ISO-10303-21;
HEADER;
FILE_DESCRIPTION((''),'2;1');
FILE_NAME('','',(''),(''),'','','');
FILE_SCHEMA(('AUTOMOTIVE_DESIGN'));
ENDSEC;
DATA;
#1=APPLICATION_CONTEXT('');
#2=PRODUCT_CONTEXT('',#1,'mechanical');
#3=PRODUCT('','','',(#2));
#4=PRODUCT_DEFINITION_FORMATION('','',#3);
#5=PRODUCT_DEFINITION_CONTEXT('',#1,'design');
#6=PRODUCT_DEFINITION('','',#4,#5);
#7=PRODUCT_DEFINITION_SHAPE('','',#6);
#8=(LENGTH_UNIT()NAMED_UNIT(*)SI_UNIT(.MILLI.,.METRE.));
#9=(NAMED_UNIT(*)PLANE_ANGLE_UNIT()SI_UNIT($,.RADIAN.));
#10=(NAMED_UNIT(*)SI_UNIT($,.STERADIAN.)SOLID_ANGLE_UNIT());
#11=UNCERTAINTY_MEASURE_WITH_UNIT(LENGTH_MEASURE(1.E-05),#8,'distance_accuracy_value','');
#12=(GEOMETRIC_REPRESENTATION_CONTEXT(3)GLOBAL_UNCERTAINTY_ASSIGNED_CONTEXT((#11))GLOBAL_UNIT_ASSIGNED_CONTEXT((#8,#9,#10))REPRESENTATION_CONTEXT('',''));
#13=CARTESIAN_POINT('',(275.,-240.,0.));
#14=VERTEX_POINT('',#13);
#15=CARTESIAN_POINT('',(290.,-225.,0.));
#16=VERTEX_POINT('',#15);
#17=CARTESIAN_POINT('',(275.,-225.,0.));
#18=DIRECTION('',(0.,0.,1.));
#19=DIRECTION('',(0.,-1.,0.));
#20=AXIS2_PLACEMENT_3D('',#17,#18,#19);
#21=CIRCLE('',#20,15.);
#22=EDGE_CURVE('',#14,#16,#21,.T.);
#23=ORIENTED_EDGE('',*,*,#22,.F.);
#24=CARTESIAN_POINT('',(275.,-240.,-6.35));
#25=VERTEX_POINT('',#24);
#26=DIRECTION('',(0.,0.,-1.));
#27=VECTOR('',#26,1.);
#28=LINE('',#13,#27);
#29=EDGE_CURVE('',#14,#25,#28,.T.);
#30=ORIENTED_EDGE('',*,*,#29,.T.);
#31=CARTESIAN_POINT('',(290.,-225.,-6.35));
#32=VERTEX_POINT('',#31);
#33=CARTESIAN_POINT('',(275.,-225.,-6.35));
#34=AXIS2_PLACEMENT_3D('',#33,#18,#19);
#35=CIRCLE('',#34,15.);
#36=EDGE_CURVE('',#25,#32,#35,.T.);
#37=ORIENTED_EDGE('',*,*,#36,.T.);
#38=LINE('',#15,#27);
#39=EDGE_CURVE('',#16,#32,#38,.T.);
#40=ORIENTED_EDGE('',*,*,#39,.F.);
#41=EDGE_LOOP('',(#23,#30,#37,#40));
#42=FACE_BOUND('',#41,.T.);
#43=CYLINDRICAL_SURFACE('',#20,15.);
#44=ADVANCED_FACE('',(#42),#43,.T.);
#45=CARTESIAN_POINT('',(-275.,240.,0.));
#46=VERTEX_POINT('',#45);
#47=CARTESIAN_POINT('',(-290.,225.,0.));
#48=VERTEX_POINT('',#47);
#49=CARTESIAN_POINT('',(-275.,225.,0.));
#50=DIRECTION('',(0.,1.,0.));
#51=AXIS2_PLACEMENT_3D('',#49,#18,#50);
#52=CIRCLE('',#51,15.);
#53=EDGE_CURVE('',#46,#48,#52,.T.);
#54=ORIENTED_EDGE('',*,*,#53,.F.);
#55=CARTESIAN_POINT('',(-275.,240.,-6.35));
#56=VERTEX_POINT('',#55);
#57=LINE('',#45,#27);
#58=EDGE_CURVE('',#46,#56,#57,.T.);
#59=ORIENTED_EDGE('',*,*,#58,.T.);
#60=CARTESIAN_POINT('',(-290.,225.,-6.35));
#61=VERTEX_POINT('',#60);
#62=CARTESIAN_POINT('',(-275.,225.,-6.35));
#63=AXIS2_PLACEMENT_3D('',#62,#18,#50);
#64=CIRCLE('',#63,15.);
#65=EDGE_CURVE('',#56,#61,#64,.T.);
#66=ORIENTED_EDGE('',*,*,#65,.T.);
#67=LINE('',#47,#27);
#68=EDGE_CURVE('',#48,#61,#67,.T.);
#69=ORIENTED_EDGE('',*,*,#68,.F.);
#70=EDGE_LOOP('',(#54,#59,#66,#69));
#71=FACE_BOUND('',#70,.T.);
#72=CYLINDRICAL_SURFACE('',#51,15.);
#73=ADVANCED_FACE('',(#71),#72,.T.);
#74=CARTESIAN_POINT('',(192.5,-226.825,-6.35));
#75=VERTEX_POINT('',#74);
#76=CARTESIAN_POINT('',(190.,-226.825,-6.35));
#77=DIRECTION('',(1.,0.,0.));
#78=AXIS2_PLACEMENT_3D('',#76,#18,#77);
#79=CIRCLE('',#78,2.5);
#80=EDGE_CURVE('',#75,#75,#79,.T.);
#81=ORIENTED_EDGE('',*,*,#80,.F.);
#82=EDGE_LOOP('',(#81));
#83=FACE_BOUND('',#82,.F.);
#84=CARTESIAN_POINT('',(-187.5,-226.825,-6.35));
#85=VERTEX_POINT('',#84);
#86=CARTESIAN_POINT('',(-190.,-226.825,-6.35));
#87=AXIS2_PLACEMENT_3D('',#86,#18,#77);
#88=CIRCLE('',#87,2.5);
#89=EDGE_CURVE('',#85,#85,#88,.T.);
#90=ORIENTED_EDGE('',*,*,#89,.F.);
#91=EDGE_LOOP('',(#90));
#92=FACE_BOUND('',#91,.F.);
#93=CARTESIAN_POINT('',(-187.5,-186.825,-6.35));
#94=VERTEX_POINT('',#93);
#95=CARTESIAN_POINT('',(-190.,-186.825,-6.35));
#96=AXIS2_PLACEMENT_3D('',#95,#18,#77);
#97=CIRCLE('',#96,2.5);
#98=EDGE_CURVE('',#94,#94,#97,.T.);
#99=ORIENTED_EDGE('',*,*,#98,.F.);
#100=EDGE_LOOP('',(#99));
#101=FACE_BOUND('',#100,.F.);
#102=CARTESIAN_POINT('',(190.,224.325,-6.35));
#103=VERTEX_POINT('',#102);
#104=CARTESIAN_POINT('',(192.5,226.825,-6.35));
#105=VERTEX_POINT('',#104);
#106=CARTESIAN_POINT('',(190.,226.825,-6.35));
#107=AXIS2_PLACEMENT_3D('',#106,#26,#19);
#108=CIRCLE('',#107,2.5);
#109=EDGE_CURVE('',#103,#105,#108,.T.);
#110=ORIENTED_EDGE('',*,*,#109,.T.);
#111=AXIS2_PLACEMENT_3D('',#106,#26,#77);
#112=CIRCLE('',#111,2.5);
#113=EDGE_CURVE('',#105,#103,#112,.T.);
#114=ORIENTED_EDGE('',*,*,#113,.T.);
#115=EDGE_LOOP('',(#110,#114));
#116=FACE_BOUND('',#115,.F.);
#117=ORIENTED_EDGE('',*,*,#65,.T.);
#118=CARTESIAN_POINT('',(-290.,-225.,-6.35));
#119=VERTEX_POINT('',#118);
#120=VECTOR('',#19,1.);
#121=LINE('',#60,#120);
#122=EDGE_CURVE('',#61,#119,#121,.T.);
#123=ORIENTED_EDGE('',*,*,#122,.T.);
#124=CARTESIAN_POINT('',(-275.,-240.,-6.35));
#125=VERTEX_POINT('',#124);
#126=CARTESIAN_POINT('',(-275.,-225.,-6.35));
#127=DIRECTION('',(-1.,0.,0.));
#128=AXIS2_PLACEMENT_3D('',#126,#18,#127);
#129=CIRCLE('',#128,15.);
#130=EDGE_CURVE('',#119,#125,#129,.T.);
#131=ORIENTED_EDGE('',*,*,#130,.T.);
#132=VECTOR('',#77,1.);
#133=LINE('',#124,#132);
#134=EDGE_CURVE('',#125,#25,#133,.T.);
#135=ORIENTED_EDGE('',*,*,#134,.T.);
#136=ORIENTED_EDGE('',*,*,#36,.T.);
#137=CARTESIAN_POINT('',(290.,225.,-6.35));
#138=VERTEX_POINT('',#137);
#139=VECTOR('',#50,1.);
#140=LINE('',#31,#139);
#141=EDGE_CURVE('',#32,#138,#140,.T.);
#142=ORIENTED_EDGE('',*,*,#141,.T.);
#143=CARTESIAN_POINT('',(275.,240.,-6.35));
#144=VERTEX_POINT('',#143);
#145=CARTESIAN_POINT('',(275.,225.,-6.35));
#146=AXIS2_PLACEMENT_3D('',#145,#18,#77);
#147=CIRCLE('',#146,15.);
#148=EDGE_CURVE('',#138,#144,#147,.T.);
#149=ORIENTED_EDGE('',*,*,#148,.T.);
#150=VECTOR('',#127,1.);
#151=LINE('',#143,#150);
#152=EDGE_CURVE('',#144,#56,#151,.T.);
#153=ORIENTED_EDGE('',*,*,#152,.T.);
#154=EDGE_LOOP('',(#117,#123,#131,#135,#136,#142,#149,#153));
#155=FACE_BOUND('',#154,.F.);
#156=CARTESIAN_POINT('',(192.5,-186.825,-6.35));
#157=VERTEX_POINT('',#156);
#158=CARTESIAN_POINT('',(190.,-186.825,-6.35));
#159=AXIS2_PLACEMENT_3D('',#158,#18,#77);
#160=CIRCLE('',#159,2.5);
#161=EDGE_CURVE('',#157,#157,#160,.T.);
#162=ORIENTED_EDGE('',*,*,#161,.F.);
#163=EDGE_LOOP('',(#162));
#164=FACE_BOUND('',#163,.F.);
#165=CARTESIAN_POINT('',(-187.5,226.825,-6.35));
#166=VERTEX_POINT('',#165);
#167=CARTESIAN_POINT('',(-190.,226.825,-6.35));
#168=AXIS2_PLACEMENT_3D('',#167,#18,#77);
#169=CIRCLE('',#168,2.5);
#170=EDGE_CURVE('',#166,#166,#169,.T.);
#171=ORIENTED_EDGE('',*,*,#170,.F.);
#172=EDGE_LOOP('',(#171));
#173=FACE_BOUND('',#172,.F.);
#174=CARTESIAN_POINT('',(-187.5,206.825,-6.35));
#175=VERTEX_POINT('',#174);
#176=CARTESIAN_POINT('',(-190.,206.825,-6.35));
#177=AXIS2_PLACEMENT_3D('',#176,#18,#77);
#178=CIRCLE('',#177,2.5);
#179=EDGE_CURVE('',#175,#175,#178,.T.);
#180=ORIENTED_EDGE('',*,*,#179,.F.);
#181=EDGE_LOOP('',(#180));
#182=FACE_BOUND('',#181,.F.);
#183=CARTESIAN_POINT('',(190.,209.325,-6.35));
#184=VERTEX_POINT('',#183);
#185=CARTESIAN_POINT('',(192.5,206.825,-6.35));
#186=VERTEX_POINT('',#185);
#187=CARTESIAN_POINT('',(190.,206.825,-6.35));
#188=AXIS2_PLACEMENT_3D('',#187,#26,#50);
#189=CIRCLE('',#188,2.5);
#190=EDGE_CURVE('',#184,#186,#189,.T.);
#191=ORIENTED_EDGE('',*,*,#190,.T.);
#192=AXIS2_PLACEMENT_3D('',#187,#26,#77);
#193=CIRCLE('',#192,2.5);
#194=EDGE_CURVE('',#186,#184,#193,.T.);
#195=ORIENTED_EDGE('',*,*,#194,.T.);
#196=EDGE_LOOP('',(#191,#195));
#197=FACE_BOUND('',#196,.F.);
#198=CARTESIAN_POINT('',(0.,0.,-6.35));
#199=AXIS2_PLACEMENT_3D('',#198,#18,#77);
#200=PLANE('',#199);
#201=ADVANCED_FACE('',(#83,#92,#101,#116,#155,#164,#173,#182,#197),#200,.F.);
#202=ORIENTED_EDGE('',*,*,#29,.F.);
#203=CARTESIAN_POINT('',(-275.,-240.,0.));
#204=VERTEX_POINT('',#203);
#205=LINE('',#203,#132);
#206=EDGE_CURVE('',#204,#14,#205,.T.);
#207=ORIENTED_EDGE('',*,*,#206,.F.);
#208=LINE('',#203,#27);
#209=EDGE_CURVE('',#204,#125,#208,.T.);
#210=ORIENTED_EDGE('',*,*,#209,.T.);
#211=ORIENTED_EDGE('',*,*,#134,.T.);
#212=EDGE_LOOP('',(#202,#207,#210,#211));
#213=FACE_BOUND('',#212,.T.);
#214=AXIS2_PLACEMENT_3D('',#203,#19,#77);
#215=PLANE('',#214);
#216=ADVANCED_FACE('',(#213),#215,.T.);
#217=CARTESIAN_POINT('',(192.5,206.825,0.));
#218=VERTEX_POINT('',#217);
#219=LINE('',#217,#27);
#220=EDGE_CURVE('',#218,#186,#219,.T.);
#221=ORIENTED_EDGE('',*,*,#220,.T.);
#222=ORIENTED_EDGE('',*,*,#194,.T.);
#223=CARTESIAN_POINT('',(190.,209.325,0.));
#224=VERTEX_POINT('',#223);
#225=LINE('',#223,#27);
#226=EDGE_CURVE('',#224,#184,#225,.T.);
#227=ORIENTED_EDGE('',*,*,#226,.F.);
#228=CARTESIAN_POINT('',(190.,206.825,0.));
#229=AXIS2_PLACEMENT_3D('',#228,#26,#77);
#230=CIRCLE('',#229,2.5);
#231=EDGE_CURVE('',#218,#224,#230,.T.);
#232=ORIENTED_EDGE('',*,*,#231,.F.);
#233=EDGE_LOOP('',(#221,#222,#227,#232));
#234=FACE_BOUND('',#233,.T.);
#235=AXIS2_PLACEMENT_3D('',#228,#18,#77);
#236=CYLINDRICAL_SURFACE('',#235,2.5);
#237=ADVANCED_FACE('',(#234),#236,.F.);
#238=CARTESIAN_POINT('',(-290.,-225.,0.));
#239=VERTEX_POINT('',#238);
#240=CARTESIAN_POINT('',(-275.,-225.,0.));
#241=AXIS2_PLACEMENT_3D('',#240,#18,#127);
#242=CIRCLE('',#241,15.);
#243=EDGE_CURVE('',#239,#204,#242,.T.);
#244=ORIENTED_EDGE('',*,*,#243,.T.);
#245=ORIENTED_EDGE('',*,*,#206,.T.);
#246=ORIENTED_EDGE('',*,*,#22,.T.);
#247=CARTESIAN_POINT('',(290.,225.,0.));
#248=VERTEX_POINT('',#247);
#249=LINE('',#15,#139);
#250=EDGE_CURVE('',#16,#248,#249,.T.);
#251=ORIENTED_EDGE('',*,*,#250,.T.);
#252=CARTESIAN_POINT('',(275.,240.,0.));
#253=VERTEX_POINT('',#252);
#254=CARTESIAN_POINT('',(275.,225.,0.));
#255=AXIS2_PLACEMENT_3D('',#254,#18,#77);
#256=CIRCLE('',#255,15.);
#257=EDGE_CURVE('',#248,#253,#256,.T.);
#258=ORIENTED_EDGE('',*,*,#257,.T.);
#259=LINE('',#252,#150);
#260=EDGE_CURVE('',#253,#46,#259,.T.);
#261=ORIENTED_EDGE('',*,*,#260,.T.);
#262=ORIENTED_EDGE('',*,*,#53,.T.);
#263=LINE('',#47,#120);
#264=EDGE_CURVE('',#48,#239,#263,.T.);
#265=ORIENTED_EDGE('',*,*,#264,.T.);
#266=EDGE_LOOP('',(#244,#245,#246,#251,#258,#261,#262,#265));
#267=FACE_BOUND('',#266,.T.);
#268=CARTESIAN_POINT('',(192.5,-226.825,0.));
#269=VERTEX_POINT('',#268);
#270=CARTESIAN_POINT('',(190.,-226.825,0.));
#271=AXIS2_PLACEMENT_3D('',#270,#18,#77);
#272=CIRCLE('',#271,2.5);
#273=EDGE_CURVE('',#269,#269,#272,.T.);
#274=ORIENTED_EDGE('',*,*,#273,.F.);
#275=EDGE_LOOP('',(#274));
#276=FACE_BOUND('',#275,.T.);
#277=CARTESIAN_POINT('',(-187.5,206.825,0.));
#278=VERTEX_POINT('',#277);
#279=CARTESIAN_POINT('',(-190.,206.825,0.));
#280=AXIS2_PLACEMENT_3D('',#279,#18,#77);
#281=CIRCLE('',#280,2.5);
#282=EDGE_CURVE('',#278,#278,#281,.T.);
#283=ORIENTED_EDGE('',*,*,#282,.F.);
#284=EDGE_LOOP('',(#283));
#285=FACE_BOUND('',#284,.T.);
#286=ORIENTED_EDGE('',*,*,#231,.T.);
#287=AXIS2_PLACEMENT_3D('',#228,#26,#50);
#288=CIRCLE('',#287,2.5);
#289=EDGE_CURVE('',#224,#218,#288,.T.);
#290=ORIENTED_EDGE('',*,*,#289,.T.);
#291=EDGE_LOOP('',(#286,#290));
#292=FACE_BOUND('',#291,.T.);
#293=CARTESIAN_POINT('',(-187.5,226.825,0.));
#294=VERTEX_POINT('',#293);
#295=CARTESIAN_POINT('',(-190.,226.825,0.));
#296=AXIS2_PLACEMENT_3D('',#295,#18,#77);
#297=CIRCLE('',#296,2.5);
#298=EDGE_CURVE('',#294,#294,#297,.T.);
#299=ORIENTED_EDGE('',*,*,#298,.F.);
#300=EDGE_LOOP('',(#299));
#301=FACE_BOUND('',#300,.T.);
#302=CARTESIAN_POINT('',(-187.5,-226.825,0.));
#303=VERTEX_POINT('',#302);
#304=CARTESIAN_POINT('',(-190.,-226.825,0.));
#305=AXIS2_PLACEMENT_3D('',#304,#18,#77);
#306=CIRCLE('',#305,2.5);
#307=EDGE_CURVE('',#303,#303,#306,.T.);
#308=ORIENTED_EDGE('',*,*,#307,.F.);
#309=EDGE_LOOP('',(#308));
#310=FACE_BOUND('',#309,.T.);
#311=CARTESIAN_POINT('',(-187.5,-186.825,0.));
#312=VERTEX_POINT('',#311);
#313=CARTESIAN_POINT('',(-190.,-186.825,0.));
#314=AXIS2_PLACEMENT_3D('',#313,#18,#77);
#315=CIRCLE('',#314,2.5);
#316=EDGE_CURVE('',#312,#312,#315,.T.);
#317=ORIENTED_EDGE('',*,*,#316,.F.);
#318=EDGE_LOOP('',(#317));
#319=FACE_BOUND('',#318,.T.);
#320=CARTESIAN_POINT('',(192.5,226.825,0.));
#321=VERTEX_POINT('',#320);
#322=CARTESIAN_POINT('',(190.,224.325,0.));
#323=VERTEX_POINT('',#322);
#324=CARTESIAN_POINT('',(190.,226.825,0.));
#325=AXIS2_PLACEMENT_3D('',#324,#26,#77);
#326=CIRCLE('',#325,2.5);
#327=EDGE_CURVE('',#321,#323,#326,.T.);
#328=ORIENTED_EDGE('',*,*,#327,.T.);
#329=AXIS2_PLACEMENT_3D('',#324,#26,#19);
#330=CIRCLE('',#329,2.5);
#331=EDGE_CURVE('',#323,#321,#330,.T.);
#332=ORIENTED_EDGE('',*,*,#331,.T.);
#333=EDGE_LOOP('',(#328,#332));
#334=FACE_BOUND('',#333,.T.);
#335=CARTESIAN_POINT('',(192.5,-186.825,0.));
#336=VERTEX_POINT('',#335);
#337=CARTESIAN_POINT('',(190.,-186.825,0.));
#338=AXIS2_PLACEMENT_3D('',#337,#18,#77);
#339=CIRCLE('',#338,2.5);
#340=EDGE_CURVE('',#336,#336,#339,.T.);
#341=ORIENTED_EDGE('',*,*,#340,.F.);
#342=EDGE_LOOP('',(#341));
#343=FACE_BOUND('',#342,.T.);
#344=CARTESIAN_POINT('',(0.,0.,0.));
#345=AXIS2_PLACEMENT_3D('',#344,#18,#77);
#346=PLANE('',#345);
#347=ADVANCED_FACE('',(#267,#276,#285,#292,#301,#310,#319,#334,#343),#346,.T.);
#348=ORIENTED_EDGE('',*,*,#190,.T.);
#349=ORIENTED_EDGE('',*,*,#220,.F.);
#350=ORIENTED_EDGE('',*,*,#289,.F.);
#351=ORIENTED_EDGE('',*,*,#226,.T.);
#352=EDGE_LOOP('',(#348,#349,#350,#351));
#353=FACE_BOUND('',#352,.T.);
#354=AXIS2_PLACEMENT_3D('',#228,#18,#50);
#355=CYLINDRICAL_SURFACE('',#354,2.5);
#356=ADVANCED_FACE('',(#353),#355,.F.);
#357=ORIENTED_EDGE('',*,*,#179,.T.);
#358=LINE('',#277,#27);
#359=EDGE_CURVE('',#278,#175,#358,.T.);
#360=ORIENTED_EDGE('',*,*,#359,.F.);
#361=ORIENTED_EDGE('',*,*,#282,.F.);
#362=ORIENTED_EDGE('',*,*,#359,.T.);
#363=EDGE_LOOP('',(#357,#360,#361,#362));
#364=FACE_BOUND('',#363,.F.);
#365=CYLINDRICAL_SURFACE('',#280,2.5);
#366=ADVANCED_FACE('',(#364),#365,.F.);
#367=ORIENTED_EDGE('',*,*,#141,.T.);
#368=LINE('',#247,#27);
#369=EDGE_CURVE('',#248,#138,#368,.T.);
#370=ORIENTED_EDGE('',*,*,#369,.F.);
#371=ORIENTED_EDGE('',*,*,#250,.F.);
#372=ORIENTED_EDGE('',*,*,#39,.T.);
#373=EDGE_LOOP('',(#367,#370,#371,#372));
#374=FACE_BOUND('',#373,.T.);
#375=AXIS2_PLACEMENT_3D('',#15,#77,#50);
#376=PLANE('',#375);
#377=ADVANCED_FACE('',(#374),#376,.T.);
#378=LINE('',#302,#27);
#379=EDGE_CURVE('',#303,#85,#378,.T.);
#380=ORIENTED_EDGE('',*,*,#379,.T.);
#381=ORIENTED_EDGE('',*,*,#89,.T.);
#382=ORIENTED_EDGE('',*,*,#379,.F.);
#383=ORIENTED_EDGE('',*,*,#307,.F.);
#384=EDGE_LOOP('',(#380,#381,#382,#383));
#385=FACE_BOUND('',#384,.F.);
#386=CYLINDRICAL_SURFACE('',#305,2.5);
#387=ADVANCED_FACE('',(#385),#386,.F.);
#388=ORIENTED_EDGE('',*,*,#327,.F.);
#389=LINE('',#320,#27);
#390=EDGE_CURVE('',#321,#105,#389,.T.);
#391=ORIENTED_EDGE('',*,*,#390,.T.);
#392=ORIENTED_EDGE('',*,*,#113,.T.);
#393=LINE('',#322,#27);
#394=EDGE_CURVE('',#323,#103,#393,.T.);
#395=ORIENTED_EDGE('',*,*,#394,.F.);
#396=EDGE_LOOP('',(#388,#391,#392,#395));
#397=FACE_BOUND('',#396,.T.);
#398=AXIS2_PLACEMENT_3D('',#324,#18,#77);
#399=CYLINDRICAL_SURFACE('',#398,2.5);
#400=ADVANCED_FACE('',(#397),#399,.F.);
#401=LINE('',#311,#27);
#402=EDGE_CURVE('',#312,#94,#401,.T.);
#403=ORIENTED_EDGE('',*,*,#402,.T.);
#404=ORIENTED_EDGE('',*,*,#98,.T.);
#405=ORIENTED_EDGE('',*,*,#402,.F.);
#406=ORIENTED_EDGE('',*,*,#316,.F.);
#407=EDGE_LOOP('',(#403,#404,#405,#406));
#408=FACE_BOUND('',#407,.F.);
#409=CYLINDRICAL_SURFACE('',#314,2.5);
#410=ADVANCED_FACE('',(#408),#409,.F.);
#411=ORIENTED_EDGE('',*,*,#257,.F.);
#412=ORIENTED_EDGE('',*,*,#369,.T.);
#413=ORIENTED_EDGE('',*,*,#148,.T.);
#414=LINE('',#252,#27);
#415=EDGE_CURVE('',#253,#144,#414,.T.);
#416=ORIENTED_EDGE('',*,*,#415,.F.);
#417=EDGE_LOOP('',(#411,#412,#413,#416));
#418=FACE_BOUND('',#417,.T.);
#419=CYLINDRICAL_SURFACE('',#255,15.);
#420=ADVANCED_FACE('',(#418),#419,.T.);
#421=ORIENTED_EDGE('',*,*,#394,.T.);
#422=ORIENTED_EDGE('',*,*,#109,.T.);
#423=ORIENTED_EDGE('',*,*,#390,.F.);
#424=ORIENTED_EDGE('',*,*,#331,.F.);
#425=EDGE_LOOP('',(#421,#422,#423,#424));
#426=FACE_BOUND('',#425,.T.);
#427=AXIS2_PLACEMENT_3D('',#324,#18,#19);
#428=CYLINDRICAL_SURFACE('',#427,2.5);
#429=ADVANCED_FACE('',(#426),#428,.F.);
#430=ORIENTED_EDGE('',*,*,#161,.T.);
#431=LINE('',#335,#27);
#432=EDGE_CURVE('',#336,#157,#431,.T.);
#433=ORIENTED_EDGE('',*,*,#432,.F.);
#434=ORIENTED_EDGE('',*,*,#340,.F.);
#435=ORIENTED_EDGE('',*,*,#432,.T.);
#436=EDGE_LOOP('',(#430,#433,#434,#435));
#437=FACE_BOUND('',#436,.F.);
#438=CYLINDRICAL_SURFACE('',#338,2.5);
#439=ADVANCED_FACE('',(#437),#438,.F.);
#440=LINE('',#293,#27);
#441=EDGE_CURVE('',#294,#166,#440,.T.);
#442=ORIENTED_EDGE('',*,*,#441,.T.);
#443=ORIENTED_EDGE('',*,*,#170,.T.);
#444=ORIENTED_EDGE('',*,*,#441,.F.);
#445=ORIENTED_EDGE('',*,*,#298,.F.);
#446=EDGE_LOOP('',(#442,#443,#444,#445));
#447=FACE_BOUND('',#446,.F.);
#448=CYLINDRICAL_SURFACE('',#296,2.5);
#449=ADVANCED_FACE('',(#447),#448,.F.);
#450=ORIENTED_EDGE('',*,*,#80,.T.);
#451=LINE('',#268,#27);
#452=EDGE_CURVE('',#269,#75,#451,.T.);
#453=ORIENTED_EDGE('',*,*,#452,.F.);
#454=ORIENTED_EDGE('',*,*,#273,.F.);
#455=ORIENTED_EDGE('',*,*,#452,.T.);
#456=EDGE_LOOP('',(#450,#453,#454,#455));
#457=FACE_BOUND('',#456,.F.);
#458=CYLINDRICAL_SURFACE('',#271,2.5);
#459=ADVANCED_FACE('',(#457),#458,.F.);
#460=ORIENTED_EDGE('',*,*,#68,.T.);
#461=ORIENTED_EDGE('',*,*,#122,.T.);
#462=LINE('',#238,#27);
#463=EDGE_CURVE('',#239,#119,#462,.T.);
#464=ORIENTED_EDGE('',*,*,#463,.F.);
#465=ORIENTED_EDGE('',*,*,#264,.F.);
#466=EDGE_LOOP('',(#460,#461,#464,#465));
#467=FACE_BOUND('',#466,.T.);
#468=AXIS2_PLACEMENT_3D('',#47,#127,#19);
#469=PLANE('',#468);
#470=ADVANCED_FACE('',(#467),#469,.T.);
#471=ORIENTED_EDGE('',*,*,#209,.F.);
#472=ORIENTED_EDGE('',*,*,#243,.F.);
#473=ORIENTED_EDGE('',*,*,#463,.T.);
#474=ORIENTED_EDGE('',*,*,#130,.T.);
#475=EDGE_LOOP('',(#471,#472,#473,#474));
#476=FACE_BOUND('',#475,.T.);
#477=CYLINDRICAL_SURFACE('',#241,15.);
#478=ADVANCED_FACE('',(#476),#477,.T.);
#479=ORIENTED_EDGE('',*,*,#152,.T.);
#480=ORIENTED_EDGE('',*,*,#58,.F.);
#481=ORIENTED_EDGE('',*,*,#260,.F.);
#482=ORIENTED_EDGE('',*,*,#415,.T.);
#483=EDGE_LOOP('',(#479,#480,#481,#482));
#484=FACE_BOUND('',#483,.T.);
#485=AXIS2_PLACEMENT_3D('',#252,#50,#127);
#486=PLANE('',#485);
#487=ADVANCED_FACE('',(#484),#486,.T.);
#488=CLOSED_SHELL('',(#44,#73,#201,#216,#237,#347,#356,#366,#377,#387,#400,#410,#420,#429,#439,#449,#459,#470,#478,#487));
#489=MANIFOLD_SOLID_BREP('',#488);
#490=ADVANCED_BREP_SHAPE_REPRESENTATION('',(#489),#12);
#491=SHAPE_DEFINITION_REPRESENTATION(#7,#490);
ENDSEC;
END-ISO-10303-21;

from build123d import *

# Parameters (mm, degrees)
F0_R     = 2.5
F1_DEPTH = 6.35


# Not quite as in the source:
# - a length typed as a fraction of an inch, garbled in the dataset ("3 / 203.2 mm" for 3/8 in), is restored


with BuildPart() as f1:
    # F0 (on Top) → F1 (new body)
    with BuildSketch(Plane.XY):
        with BuildLine():
            Line((-275, -240), (275, -240))
            ThreePointArc((275, -240), (285.6066017178, -235.6066017178), (290, -225))
            Line((290, -225), (290, 225))
            ThreePointArc((290, 225), (285.6066017178, 235.6066017178), (275, 240))
            Line((275, 240), (-275, 240))
            ThreePointArc((-275, 240), (-285.6066017178, 235.6066017178), (-290, 225))
            Line((-290, 225), (-290, -225))
            ThreePointArc((-290, -225), (-285.6066017178, -235.6066017178), (-275, -240))
        make_face()
        with Locations((-190, -226.825)):
            Circle(F0_R, mode=Mode.SUBTRACT)
        with Locations((-190, -186.825)):
            Circle(F0_R, mode=Mode.SUBTRACT)
        with Locations((190, -226.825)):
            Circle(F0_R, mode=Mode.SUBTRACT)
        with Locations((190, -186.825)):
            Circle(F0_R, mode=Mode.SUBTRACT)
        with Locations((-190, 206.825)):
            Circle(F0_R, mode=Mode.SUBTRACT)
        with Locations((-190, 226.825)):
            Circle(F0_R, mode=Mode.SUBTRACT)
        with BuildLine():
            ThreePointArc((190, 209.325), (191.767766953, 208.592766953), (192.5, 206.825))
            ThreePointArc((192.5, 206.825), (188.232233047, 205.057233047), (190, 209.325))
        make_face(mode=Mode.SUBTRACT)
        with BuildLine():
            ThreePointArc((192.5, 226.825), (191.767766953, 225.057233047), (190, 224.325))
            ThreePointArc((190, 224.325), (188.232233047, 228.592766953), (192.5, 226.825))
        make_face(mode=Mode.SUBTRACT)
    extrude(amount=-F1_DEPTH)


solid = f1.part
